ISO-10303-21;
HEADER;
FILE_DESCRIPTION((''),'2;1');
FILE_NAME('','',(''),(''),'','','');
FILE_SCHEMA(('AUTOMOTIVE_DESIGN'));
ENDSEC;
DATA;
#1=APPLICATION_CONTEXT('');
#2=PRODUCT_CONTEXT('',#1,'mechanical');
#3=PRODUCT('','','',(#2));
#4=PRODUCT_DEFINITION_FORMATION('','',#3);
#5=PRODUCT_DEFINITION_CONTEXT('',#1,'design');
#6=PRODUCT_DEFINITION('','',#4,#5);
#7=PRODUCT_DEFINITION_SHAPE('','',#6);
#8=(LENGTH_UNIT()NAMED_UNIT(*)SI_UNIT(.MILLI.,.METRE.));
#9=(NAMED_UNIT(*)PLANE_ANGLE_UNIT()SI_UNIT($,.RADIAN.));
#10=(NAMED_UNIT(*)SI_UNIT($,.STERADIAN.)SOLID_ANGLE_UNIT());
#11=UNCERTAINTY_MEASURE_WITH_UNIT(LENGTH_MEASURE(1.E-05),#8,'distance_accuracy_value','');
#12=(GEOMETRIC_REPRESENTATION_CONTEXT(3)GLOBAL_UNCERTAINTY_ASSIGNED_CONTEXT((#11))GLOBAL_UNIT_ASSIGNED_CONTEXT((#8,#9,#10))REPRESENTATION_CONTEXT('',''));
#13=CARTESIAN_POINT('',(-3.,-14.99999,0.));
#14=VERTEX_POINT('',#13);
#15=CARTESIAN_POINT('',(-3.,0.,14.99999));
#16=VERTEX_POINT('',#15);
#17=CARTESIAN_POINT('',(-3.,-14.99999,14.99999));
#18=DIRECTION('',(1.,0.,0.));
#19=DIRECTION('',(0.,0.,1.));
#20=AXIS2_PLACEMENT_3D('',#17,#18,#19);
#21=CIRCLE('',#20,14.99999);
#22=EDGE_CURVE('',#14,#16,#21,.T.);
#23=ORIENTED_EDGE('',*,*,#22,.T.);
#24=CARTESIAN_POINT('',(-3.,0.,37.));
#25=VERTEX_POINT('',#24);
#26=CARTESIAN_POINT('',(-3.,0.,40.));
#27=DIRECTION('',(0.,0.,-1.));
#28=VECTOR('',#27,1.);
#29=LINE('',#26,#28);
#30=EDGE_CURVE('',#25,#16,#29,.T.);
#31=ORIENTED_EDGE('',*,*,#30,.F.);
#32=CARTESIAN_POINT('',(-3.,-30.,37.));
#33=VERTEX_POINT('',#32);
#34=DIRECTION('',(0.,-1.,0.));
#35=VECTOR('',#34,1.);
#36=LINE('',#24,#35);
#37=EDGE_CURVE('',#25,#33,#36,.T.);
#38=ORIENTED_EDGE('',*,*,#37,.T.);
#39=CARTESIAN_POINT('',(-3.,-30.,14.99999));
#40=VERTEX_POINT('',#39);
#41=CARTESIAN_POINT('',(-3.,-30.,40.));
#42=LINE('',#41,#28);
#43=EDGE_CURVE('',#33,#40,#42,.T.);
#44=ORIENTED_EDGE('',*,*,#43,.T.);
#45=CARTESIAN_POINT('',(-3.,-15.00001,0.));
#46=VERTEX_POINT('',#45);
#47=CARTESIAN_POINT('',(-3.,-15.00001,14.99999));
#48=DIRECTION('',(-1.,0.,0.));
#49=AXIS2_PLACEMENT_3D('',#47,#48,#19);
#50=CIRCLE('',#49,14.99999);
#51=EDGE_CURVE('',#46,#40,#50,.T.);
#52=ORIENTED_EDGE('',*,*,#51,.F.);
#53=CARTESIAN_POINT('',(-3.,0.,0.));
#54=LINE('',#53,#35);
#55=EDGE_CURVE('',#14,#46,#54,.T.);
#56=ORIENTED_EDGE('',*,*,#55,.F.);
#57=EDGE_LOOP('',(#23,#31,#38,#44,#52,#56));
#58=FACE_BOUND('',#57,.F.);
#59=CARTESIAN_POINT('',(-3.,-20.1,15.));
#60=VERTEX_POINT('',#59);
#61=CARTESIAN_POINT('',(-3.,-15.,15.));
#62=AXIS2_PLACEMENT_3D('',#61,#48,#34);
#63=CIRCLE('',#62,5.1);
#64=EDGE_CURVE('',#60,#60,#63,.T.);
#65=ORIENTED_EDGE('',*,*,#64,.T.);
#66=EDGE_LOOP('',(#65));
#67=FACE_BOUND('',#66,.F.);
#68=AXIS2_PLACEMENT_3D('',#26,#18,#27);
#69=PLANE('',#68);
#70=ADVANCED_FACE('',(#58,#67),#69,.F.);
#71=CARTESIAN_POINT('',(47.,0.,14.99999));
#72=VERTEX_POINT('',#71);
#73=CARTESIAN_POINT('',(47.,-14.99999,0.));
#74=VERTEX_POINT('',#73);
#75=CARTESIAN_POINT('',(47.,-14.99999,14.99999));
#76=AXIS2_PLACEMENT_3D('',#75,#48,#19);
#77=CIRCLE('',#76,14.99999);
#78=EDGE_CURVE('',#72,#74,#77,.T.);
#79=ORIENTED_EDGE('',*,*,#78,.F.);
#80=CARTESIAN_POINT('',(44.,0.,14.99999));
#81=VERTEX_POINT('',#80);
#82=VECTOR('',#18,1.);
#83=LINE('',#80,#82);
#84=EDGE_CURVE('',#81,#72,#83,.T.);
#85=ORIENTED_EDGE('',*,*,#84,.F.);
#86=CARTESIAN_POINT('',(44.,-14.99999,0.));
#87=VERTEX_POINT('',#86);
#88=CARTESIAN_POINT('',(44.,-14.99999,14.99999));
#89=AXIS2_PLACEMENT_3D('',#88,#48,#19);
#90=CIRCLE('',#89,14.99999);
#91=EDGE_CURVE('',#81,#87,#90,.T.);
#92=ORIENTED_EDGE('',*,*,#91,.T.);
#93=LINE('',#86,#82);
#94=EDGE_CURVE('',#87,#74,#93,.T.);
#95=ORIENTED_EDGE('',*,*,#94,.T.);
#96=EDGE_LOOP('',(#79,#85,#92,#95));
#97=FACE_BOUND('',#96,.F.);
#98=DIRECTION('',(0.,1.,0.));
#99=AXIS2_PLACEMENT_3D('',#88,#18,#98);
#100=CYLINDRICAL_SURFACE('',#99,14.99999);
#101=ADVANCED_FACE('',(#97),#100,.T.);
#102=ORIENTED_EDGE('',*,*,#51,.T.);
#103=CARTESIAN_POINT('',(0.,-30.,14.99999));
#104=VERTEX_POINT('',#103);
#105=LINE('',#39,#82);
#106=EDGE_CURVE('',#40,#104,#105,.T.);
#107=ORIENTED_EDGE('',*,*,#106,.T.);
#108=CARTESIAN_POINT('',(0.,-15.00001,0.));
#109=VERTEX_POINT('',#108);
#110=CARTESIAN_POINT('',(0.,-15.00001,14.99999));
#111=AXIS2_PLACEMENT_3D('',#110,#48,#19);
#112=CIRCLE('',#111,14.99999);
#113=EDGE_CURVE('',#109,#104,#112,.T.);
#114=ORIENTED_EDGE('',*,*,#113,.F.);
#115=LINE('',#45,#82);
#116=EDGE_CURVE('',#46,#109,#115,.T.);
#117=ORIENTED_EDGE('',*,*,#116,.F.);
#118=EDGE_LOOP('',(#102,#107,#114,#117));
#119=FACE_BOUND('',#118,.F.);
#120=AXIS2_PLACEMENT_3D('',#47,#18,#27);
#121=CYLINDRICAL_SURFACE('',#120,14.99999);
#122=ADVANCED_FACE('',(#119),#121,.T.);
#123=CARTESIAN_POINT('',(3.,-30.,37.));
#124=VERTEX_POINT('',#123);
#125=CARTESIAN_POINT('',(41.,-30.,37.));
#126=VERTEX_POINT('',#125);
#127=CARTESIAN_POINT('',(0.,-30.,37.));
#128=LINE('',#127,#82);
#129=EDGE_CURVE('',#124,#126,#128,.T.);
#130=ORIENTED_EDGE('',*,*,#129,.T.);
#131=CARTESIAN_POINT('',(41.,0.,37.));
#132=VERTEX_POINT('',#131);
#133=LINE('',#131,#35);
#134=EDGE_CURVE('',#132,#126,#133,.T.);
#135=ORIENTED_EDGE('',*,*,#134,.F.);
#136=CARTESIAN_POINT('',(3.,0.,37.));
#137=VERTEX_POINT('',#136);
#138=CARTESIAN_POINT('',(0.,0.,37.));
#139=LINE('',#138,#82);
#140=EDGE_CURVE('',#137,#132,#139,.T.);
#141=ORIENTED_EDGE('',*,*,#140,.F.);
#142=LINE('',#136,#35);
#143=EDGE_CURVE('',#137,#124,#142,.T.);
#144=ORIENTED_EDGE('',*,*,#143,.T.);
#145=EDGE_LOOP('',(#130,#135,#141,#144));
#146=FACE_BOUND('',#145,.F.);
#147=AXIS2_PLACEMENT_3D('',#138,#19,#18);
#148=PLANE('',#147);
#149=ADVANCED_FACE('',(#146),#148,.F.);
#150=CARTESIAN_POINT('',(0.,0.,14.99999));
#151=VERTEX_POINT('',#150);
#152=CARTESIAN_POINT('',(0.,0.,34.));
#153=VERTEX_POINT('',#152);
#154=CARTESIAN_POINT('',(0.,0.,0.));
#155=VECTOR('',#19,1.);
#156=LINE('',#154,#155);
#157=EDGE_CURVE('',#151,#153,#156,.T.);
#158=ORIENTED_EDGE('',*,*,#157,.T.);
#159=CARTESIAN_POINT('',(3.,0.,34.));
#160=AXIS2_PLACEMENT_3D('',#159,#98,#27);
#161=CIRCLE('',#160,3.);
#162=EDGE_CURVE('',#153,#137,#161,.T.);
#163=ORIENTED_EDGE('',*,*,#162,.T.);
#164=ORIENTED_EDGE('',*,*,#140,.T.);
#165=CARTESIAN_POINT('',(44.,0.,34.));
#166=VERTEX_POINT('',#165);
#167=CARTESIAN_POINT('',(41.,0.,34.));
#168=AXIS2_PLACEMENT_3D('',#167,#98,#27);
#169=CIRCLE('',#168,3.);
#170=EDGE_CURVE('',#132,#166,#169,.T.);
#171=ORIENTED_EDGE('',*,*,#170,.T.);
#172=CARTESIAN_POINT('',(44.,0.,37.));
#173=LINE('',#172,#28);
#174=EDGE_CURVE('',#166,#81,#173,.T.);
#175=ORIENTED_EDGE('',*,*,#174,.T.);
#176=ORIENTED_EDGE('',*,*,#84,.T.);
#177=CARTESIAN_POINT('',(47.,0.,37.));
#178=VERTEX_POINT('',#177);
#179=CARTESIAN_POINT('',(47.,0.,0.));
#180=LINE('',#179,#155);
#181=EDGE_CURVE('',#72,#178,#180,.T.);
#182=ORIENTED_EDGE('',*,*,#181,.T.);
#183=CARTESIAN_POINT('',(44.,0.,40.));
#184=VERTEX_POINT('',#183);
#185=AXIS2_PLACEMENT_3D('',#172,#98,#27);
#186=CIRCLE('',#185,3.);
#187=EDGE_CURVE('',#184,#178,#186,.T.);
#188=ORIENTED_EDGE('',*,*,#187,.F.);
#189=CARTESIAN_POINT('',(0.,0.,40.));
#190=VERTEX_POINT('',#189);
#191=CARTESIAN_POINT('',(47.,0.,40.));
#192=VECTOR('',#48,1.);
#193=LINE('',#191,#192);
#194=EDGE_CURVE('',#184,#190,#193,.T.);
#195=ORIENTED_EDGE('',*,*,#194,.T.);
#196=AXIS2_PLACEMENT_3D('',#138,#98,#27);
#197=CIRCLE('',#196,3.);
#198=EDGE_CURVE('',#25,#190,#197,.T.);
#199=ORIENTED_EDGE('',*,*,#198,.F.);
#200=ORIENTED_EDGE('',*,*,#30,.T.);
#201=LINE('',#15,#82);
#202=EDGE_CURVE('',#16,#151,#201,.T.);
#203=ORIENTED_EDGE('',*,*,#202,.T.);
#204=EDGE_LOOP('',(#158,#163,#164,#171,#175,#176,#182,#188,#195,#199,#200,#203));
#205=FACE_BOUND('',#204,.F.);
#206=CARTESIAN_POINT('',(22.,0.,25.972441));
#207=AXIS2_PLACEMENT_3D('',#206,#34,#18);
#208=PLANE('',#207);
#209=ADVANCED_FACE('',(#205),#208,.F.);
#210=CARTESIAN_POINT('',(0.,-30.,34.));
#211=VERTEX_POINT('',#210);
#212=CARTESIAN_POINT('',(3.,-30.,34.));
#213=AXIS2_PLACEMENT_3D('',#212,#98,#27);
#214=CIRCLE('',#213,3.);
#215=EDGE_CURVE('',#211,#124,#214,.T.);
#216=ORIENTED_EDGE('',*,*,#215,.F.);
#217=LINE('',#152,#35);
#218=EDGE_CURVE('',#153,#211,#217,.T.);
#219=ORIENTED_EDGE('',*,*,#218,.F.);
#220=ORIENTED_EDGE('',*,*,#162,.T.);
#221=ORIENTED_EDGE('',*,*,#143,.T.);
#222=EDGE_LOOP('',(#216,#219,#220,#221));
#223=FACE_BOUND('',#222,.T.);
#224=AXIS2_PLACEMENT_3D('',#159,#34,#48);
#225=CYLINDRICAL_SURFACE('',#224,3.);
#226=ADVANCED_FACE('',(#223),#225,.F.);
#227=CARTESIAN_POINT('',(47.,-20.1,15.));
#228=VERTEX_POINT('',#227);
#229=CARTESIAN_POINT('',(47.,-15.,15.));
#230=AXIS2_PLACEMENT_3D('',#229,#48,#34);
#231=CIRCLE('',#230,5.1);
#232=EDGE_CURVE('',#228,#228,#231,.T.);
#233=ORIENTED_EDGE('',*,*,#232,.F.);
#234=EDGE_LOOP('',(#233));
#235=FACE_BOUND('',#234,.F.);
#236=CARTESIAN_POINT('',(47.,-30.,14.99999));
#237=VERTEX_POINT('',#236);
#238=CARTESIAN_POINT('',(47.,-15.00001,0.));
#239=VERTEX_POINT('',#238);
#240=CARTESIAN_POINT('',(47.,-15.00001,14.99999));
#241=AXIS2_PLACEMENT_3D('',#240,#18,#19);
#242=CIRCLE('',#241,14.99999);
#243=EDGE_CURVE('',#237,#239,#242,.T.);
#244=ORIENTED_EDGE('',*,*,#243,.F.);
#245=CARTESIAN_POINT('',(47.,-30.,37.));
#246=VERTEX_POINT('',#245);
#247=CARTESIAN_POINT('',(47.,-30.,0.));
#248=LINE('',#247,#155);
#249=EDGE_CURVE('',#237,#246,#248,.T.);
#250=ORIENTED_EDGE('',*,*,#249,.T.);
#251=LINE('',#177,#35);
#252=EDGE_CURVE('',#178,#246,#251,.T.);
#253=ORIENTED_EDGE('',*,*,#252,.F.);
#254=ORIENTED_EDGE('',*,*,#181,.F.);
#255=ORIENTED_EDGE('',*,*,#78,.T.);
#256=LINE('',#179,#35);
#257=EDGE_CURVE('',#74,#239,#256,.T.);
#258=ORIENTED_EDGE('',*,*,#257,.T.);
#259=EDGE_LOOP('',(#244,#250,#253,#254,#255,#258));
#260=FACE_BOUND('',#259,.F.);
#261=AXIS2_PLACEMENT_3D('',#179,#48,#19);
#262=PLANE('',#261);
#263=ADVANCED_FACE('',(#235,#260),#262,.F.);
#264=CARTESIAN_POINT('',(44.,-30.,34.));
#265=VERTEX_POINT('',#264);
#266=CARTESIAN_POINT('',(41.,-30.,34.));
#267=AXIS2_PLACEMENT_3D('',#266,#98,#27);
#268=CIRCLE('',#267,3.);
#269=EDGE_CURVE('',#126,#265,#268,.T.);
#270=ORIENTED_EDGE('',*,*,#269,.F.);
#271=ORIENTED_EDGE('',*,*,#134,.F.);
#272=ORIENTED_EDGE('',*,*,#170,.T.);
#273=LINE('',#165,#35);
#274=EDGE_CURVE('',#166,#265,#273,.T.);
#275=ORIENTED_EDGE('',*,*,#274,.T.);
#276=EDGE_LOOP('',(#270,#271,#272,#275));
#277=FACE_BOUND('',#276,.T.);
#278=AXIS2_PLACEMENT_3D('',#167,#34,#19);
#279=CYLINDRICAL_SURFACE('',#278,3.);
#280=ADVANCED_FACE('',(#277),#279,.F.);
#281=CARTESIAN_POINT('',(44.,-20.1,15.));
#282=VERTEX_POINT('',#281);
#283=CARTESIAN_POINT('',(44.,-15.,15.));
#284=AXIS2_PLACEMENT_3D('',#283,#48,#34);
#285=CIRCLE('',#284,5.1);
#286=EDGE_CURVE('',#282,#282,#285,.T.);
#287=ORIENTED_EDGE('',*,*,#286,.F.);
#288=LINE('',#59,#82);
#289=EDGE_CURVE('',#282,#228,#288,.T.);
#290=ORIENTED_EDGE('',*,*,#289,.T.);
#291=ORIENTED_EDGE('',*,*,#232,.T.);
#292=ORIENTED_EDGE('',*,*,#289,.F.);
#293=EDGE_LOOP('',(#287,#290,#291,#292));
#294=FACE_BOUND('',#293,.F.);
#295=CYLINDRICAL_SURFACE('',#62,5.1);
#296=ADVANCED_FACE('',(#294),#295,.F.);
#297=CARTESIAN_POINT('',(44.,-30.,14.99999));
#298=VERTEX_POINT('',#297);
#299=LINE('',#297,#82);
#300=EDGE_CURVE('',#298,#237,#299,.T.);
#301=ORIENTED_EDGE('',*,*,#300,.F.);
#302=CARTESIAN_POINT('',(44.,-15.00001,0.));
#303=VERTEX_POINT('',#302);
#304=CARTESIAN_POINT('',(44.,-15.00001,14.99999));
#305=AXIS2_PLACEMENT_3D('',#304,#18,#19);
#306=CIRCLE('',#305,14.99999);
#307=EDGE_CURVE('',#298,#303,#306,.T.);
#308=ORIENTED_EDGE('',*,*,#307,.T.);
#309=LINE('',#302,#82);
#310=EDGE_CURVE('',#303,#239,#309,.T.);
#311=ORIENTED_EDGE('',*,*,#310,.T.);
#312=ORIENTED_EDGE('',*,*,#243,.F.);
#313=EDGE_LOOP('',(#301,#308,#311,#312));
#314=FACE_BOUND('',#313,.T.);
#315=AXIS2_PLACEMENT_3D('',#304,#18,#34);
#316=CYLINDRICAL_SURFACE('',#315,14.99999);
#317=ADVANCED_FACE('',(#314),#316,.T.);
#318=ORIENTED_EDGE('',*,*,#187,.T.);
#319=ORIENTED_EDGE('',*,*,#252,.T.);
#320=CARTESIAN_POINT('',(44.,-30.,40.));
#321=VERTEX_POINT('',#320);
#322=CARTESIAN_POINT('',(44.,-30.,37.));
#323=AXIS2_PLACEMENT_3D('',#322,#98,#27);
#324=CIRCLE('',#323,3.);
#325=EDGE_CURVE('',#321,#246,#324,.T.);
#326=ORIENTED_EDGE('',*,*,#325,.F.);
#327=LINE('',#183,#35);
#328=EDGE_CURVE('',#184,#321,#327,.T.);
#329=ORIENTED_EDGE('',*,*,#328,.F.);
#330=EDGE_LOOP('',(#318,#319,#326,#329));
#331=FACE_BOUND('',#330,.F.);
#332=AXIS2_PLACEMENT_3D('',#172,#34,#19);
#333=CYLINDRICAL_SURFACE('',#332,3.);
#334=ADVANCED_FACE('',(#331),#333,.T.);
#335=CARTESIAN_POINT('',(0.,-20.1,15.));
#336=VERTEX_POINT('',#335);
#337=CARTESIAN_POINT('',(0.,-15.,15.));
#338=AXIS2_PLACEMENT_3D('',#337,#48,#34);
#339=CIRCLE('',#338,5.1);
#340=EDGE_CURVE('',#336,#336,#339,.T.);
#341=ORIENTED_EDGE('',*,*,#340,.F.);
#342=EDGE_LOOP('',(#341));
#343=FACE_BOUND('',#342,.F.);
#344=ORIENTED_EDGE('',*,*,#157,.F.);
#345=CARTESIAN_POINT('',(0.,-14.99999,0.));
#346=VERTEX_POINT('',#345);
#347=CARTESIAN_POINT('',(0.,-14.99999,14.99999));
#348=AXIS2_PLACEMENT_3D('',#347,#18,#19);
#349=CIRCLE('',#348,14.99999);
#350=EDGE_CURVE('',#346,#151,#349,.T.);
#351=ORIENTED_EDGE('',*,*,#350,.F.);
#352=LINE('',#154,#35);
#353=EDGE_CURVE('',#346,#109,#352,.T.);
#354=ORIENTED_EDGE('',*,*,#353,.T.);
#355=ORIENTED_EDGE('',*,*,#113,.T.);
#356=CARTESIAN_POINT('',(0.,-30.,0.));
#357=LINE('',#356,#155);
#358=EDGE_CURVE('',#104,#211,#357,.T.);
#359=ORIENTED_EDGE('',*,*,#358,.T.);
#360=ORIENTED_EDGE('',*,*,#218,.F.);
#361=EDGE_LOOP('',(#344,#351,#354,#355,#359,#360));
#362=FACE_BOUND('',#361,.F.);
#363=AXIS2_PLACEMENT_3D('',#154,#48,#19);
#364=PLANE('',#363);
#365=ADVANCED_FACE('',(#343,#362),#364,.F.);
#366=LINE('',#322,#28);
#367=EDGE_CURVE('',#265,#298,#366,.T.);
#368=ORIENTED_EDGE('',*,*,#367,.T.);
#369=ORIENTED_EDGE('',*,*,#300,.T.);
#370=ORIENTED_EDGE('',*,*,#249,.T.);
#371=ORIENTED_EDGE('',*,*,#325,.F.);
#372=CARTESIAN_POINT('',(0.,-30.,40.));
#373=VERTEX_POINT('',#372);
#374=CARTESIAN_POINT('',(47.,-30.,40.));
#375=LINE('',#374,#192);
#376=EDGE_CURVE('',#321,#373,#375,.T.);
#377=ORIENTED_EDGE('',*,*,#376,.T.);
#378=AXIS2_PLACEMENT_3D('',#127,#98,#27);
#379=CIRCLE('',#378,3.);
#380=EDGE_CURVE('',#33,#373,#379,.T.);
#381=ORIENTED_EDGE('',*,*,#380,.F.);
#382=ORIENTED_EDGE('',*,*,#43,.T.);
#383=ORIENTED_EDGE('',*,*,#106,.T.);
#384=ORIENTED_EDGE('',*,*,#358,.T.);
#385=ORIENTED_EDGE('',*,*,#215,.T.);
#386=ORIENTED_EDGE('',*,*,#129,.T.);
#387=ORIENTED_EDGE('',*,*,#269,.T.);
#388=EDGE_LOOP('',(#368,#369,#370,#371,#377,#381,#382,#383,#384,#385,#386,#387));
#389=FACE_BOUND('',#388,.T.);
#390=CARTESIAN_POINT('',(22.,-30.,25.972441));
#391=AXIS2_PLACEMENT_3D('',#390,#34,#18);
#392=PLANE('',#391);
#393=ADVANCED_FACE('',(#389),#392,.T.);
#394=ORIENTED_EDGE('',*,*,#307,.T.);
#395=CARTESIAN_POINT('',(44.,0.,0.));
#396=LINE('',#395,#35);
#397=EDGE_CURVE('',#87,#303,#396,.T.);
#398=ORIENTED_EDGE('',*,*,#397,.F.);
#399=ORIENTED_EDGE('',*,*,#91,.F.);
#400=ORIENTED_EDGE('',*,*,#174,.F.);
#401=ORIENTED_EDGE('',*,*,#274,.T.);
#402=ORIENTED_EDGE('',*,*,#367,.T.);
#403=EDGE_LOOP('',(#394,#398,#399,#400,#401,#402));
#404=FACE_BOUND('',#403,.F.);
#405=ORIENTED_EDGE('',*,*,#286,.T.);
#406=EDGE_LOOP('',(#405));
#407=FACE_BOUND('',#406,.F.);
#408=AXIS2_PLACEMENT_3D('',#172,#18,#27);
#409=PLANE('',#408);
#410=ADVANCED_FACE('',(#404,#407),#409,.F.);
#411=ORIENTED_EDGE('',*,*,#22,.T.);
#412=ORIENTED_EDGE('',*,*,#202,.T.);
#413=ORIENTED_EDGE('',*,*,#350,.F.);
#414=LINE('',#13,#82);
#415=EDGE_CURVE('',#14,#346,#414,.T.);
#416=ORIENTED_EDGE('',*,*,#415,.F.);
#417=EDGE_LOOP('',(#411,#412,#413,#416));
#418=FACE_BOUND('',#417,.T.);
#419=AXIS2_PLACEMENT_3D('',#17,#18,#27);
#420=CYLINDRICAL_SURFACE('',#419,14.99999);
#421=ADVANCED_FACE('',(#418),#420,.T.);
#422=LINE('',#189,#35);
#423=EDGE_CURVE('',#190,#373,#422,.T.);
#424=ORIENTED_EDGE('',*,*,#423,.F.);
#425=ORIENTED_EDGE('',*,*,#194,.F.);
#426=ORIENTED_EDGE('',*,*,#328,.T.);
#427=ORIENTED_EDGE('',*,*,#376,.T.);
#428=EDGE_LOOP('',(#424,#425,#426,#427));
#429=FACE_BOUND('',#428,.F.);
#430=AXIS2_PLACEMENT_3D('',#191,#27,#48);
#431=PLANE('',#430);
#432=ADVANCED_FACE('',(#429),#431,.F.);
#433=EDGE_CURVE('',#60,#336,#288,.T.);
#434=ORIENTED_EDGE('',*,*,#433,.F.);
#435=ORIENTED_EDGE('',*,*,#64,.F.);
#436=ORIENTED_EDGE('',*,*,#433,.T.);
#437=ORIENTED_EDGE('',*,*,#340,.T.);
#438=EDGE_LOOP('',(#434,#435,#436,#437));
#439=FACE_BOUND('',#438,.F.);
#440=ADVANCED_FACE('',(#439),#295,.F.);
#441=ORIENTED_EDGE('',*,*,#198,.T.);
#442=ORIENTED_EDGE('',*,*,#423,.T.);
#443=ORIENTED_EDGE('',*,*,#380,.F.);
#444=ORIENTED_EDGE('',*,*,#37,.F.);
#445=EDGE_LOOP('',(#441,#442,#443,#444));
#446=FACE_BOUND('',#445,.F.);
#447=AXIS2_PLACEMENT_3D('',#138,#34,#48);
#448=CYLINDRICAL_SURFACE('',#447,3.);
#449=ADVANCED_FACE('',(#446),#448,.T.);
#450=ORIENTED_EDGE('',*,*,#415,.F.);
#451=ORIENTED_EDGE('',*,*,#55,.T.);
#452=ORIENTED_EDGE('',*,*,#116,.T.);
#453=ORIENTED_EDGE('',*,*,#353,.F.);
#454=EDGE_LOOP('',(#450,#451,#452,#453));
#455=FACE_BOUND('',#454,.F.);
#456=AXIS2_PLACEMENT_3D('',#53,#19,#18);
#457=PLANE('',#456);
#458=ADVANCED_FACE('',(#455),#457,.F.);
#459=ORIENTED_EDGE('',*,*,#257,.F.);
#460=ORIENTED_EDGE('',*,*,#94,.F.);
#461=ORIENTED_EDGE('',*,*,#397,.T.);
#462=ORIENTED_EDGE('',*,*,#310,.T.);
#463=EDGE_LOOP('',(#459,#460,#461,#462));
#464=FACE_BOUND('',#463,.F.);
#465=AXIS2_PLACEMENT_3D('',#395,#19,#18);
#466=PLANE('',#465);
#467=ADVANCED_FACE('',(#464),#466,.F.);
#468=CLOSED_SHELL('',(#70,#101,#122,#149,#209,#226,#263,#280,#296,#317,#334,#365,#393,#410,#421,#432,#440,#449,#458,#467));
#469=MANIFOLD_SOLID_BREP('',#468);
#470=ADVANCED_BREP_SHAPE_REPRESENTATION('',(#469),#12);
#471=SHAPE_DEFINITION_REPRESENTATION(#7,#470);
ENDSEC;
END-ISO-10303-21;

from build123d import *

# Parameters (mm, degrees)
F1_DEPTH = 30
F2_R     = 5.1
F3_DEPTH = 50.0010000522
F4_R     = 14.99999
F5_R     = 3


# Not quite as in the source:
# - a fillet or chamfer is up to 0.001 mm smaller than in the source, because OpenCascade refuses the exact size


with BuildPart() as f1:
    # F0 (on Front) → F1 (new body)
    with BuildSketch(Plane.XZ):
        Polygon((-3.0000000261, 0), (0, 0), (0, 37), (44, 37), (44, 0), (47.0000000261, 0), (47.0000000261, 40.0000000261), (-3.0000000261, 40.0000000261), align=None)
    extrude(amount=F1_DEPTH)

    # F2 (on face) → F3 (cut, through all)
    with BuildSketch(Plane(origin=(-3.0000000261, 0, 0), x_dir=(0, -1, 0), z_dir=(-1, 0, 0))):
        with Locations((15, 15.0000000261)):
            Circle(F2_R)
    extrude(amount=-F3_DEPTH, mode=Mode.SUBTRACT)

    # F4 (radius 15 in the source; OpenCascade refuses exactly that, so slightly less here)
    f4_edges = [f1.edges().sort_by_distance(p)[0] for p in [
        (45.5, 0, 0),
        (45.5, -30, 0),
        (-1.5, -30, 0),
        (-1.5, 0, 0),
    ]]
    fillet(f4_edges, radius=F4_R)

    # F5
    f5_edges = [f1.edges().sort_by_distance(p)[0] for p in [
        (0, -15, 37),
        (44, -15, 37),
        (47, -15, 40),
        (-3, -15, 40),
    ]]
    fillet(f5_edges, radius=F5_R)


solid = f1.part
